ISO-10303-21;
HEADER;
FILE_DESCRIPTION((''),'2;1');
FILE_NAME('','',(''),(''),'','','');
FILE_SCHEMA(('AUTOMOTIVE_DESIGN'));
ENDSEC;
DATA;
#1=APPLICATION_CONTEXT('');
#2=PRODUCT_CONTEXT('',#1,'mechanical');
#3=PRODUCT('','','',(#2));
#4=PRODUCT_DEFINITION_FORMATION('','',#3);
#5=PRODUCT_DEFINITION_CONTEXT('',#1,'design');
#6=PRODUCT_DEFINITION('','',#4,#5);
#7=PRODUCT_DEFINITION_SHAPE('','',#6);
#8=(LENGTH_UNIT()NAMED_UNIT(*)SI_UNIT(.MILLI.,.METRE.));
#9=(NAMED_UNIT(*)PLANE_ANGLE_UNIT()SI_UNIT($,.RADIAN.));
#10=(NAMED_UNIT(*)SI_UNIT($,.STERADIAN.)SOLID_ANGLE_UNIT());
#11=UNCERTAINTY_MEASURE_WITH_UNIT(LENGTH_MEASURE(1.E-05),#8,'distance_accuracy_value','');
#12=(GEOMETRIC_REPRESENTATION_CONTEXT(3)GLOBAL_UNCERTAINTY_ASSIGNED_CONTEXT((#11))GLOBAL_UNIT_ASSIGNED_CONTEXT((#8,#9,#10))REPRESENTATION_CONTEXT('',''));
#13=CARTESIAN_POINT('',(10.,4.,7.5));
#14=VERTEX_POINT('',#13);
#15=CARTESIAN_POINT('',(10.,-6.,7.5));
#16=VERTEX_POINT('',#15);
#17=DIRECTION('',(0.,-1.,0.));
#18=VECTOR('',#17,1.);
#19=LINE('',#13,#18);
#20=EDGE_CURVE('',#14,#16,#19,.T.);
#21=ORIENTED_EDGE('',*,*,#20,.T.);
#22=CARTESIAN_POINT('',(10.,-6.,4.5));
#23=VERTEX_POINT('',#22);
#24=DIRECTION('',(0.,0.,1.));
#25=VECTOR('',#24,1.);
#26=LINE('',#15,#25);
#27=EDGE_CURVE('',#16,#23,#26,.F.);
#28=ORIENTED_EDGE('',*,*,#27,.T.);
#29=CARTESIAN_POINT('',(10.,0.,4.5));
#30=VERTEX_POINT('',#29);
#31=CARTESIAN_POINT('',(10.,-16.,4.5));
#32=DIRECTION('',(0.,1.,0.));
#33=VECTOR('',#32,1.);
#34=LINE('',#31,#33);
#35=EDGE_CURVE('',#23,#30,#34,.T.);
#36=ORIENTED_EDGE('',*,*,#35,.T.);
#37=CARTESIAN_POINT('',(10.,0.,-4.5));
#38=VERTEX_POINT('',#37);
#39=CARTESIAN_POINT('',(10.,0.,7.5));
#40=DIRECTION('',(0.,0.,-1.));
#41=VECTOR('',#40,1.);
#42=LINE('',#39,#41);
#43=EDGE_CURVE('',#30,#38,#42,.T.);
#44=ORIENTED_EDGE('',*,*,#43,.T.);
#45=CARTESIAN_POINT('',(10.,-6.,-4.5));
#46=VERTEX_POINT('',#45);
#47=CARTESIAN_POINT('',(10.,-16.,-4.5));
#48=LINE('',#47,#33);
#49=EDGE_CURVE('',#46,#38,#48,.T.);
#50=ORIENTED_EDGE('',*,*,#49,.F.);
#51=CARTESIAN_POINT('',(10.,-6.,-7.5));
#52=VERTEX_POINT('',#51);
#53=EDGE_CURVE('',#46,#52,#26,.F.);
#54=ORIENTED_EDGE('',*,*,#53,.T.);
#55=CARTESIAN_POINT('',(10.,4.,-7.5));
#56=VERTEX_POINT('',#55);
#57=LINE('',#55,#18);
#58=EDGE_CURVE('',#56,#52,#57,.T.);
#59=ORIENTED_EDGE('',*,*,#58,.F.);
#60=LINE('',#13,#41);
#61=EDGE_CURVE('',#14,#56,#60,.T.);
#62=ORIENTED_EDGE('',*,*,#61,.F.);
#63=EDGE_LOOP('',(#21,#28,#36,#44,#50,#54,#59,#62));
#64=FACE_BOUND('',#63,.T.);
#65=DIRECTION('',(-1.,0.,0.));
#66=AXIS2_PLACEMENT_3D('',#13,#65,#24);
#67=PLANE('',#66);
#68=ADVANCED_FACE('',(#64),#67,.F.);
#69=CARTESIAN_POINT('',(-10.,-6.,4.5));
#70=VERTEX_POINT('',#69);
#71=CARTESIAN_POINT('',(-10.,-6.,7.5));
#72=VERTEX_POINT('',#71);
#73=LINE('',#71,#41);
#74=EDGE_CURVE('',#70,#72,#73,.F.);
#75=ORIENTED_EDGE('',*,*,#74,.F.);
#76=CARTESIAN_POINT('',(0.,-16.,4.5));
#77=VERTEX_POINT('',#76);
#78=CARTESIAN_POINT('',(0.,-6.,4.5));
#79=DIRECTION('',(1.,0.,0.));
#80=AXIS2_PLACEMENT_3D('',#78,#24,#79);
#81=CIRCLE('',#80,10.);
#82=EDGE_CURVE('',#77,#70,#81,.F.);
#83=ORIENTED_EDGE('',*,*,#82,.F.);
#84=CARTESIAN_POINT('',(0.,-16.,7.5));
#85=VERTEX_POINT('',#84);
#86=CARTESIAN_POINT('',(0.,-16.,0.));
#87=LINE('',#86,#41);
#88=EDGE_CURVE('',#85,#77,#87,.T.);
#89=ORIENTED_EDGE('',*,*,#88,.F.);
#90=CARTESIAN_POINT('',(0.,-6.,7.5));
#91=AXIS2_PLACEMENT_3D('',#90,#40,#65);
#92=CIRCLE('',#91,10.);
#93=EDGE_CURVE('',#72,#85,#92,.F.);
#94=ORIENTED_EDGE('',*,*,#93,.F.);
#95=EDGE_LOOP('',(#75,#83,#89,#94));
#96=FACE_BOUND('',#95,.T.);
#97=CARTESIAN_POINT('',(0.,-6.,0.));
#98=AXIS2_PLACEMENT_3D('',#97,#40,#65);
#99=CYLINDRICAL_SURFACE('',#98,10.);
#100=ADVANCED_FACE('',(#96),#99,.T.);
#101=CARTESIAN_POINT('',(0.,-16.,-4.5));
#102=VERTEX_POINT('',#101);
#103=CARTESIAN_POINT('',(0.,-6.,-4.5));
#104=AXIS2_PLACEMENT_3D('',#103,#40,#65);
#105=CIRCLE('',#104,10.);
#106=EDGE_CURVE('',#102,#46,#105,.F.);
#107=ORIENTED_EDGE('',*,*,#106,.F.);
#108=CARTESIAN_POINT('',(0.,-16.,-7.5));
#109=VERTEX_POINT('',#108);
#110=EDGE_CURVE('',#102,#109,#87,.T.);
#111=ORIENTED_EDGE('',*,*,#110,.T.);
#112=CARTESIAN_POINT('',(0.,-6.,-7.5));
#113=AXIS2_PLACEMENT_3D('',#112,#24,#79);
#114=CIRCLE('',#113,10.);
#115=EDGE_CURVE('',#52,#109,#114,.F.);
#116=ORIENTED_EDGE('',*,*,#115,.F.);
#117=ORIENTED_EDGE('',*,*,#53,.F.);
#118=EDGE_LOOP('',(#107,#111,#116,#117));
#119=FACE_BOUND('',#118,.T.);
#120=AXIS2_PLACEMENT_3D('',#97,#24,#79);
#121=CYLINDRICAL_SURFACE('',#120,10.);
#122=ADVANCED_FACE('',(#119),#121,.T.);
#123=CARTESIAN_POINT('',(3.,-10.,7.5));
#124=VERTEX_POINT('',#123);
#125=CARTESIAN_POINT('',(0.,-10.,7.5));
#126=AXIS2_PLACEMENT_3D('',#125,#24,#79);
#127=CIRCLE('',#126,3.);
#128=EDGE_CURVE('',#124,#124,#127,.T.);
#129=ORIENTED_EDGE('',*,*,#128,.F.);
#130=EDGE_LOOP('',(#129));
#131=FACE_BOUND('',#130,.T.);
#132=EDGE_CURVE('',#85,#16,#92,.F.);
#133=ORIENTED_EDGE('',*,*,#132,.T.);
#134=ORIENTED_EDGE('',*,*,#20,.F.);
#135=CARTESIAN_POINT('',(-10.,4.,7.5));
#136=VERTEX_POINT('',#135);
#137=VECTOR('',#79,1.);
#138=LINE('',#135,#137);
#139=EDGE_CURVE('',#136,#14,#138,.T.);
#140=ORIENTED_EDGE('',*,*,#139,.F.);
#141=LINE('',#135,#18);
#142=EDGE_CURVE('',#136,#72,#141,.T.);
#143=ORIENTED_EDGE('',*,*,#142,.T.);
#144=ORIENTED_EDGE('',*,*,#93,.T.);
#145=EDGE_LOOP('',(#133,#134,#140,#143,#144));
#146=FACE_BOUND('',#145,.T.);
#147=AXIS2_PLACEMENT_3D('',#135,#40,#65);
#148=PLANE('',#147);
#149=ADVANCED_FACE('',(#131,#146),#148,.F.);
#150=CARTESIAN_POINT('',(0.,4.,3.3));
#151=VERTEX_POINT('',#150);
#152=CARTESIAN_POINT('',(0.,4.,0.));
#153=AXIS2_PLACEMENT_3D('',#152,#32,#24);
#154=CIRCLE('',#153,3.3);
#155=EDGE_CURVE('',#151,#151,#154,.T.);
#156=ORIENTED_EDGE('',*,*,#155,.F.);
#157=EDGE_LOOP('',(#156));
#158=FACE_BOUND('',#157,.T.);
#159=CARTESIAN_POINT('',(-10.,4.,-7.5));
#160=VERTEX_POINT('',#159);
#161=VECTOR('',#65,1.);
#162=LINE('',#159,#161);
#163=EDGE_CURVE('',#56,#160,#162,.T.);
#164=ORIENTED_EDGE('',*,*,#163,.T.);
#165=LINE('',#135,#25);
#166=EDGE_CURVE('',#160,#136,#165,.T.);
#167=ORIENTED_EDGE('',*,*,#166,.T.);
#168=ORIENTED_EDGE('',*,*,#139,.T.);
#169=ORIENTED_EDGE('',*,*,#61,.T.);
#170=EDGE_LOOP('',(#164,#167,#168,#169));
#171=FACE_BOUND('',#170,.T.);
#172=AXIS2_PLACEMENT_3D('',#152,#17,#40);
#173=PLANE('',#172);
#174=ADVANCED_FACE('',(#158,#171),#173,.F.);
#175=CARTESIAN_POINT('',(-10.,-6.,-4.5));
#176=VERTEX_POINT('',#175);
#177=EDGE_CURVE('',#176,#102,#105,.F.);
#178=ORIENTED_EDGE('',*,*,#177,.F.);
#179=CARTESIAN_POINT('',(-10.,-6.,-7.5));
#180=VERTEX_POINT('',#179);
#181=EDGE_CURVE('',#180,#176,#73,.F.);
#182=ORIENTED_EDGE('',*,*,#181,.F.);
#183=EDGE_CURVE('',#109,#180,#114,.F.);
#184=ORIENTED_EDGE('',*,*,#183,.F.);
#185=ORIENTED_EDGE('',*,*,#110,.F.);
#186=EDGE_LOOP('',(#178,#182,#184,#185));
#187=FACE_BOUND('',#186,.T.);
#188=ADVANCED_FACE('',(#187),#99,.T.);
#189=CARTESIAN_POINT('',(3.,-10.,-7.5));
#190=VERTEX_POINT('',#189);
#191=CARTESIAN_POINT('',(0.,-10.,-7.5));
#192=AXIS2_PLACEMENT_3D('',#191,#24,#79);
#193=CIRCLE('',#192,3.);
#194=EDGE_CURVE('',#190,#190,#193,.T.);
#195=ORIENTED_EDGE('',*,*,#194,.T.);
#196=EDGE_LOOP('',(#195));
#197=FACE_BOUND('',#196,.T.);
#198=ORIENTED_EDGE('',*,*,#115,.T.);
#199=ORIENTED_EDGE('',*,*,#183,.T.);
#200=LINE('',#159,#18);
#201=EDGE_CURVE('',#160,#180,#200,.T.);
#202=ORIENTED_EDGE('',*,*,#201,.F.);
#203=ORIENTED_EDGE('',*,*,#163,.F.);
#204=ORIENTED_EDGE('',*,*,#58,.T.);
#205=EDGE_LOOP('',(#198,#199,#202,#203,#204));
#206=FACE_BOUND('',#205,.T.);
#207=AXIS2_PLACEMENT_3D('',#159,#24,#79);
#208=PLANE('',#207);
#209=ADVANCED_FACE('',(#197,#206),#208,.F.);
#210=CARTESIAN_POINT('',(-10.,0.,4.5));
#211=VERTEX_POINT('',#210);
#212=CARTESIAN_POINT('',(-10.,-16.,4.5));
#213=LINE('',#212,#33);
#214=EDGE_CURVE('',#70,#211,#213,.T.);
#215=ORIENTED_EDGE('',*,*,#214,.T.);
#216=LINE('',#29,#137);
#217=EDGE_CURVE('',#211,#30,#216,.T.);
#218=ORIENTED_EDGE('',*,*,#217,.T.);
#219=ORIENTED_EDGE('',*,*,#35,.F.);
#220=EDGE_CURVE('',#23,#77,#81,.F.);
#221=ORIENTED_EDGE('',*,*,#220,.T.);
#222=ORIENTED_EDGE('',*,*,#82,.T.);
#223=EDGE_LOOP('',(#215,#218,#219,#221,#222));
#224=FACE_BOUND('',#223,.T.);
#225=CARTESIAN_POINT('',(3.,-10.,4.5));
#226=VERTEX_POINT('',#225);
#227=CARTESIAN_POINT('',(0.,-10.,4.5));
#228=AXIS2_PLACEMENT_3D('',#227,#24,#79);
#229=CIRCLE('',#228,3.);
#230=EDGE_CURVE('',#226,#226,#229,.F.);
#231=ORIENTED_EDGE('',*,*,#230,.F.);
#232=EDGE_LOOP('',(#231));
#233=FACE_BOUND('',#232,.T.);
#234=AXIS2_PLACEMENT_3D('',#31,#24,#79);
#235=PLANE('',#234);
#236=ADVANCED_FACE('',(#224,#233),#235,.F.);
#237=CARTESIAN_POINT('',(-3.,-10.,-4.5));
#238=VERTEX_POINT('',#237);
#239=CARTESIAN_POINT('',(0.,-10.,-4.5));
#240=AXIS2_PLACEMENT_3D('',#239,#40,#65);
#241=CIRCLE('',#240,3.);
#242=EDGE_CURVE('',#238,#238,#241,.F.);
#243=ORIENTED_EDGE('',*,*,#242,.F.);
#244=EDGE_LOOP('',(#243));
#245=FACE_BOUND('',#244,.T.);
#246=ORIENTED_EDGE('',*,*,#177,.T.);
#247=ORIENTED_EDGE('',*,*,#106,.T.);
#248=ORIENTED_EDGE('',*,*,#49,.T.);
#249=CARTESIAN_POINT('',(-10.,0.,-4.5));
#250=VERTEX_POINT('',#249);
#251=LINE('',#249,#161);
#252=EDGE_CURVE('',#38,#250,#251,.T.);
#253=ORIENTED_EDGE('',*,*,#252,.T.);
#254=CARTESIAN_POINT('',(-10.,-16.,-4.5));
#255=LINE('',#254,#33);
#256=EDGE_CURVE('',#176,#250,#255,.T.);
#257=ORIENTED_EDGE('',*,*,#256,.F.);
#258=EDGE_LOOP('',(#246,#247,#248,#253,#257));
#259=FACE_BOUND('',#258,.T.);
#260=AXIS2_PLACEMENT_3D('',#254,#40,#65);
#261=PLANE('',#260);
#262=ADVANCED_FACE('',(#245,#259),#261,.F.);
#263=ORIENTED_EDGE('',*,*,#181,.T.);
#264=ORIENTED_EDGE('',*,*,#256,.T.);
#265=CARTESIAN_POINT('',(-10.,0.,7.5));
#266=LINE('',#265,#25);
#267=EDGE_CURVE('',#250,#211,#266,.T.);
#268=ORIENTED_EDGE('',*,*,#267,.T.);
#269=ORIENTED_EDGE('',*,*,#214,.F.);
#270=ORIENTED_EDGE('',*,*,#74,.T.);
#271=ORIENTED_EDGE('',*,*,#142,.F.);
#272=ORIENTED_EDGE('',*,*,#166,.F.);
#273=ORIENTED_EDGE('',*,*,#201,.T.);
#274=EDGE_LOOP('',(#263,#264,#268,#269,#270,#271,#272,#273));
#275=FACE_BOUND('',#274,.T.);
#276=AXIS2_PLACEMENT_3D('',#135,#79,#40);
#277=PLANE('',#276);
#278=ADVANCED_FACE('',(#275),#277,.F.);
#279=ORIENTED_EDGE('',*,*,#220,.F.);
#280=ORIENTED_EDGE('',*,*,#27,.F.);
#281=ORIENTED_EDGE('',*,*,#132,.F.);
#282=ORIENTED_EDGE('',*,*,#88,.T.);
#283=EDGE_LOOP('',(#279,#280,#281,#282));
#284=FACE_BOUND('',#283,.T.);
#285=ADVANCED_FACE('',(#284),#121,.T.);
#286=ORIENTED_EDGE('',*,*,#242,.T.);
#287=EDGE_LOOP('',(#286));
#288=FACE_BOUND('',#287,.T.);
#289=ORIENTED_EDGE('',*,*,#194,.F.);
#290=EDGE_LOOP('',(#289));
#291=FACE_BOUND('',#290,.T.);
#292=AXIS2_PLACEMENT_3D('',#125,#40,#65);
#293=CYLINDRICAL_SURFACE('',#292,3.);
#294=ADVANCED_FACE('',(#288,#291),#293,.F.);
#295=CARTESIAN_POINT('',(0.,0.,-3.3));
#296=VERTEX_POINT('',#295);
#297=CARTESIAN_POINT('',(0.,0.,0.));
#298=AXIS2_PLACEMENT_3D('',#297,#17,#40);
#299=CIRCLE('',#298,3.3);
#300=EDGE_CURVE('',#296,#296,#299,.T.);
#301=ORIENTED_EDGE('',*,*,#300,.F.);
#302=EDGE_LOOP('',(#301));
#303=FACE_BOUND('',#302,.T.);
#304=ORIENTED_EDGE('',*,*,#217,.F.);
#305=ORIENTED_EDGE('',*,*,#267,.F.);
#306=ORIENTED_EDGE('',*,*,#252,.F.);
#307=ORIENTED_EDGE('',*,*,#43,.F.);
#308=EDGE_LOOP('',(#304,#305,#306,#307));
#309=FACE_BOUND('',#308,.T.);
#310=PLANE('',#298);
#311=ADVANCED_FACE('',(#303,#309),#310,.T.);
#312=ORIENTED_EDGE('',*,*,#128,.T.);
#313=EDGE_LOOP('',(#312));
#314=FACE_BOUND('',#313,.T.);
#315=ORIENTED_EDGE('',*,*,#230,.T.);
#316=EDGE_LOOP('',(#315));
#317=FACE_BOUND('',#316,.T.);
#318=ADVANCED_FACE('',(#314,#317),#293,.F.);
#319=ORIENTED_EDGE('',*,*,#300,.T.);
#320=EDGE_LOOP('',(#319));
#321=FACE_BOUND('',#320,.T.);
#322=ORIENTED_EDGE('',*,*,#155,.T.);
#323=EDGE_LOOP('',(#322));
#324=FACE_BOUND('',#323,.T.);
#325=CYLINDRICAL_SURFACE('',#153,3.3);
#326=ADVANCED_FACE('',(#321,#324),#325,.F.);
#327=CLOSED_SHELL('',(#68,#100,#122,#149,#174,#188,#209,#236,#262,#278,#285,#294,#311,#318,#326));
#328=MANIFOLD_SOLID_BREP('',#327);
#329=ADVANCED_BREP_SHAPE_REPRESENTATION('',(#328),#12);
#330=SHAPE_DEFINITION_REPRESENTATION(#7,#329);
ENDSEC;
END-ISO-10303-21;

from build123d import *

# Parameters (mm, degrees)
SKETCH1_W                = 20
SKETCH1_H                = 15
BOSS_EXTRUDE1_DEPTH      = 4
SKETCH3_W                = 20
SKETCH3_H                = 3
BOSS_EXTRUDE2_DEPTH      = 16
M6_CLEARANCE_HOLE1_D     = 6.6
M6_CLEARANCE_HOLE1_DEPTH = 8
M6_CLEARANCE_HOLE1_TIP   = 1.982840043
SKETCH6_R                = 3
CUT_EXTRUDE1_DEPTH       = 15
FILLET1_R                = 10


with BuildPart() as part:
    # Sketch1 → Boss-Extrude1 (new body)
    with BuildSketch(Plane(origin=(0, 0, 0), x_dir=(1, 0, 0), z_dir=(0, 1, 0))):
        Rectangle(SKETCH1_W, SKETCH1_H)
    extrude(amount=BOSS_EXTRUDE1_DEPTH)

    # Sketch3 → Boss-Extrude2 (add)
    with BuildSketch(Plane.XZ):
        with Locations((0, -6)):
            Rectangle(SKETCH3_W, SKETCH3_H)
        with Locations((0, 6)):
            Rectangle(SKETCH3_W, SKETCH3_H)
    extrude(amount=BOSS_EXTRUDE2_DEPTH)

    # M6 Clearance Hole1
    with Locations(Plane.ZX.offset(4)):
        with Locations((0, 0)):
            Hole(M6_CLEARANCE_HOLE1_D / 2, depth=M6_CLEARANCE_HOLE1_DEPTH)
            with Locations((0, 0, -(M6_CLEARANCE_HOLE1_DEPTH + M6_CLEARANCE_HOLE1_TIP / 2))):  # 118° drill point
                Cone(0, M6_CLEARANCE_HOLE1_D / 2, M6_CLEARANCE_HOLE1_TIP, mode=Mode.SUBTRACT)

    # Sketch6 → Cut-Extrude1 (cut)
    with BuildSketch(Plane.XY.offset(-7.5)):
        with Locations((0, -10)):
            Circle(SKETCH6_R)
    extrude(amount=CUT_EXTRUDE1_DEPTH, mode=Mode.SUBTRACT)

    # Fillet1
    fillet1_edges = [part.edges().sort_by_distance(p)[0] for p in [
        (10, -16, -6),
        (10, -16, 6),
        (-10, -16, 6),
        (-10, -16, -6),
    ]]
    fillet(fillet1_edges, radius=FILLET1_R - 0.0001)  # a hair under: the kernel refuses the full size


solid = part.part
